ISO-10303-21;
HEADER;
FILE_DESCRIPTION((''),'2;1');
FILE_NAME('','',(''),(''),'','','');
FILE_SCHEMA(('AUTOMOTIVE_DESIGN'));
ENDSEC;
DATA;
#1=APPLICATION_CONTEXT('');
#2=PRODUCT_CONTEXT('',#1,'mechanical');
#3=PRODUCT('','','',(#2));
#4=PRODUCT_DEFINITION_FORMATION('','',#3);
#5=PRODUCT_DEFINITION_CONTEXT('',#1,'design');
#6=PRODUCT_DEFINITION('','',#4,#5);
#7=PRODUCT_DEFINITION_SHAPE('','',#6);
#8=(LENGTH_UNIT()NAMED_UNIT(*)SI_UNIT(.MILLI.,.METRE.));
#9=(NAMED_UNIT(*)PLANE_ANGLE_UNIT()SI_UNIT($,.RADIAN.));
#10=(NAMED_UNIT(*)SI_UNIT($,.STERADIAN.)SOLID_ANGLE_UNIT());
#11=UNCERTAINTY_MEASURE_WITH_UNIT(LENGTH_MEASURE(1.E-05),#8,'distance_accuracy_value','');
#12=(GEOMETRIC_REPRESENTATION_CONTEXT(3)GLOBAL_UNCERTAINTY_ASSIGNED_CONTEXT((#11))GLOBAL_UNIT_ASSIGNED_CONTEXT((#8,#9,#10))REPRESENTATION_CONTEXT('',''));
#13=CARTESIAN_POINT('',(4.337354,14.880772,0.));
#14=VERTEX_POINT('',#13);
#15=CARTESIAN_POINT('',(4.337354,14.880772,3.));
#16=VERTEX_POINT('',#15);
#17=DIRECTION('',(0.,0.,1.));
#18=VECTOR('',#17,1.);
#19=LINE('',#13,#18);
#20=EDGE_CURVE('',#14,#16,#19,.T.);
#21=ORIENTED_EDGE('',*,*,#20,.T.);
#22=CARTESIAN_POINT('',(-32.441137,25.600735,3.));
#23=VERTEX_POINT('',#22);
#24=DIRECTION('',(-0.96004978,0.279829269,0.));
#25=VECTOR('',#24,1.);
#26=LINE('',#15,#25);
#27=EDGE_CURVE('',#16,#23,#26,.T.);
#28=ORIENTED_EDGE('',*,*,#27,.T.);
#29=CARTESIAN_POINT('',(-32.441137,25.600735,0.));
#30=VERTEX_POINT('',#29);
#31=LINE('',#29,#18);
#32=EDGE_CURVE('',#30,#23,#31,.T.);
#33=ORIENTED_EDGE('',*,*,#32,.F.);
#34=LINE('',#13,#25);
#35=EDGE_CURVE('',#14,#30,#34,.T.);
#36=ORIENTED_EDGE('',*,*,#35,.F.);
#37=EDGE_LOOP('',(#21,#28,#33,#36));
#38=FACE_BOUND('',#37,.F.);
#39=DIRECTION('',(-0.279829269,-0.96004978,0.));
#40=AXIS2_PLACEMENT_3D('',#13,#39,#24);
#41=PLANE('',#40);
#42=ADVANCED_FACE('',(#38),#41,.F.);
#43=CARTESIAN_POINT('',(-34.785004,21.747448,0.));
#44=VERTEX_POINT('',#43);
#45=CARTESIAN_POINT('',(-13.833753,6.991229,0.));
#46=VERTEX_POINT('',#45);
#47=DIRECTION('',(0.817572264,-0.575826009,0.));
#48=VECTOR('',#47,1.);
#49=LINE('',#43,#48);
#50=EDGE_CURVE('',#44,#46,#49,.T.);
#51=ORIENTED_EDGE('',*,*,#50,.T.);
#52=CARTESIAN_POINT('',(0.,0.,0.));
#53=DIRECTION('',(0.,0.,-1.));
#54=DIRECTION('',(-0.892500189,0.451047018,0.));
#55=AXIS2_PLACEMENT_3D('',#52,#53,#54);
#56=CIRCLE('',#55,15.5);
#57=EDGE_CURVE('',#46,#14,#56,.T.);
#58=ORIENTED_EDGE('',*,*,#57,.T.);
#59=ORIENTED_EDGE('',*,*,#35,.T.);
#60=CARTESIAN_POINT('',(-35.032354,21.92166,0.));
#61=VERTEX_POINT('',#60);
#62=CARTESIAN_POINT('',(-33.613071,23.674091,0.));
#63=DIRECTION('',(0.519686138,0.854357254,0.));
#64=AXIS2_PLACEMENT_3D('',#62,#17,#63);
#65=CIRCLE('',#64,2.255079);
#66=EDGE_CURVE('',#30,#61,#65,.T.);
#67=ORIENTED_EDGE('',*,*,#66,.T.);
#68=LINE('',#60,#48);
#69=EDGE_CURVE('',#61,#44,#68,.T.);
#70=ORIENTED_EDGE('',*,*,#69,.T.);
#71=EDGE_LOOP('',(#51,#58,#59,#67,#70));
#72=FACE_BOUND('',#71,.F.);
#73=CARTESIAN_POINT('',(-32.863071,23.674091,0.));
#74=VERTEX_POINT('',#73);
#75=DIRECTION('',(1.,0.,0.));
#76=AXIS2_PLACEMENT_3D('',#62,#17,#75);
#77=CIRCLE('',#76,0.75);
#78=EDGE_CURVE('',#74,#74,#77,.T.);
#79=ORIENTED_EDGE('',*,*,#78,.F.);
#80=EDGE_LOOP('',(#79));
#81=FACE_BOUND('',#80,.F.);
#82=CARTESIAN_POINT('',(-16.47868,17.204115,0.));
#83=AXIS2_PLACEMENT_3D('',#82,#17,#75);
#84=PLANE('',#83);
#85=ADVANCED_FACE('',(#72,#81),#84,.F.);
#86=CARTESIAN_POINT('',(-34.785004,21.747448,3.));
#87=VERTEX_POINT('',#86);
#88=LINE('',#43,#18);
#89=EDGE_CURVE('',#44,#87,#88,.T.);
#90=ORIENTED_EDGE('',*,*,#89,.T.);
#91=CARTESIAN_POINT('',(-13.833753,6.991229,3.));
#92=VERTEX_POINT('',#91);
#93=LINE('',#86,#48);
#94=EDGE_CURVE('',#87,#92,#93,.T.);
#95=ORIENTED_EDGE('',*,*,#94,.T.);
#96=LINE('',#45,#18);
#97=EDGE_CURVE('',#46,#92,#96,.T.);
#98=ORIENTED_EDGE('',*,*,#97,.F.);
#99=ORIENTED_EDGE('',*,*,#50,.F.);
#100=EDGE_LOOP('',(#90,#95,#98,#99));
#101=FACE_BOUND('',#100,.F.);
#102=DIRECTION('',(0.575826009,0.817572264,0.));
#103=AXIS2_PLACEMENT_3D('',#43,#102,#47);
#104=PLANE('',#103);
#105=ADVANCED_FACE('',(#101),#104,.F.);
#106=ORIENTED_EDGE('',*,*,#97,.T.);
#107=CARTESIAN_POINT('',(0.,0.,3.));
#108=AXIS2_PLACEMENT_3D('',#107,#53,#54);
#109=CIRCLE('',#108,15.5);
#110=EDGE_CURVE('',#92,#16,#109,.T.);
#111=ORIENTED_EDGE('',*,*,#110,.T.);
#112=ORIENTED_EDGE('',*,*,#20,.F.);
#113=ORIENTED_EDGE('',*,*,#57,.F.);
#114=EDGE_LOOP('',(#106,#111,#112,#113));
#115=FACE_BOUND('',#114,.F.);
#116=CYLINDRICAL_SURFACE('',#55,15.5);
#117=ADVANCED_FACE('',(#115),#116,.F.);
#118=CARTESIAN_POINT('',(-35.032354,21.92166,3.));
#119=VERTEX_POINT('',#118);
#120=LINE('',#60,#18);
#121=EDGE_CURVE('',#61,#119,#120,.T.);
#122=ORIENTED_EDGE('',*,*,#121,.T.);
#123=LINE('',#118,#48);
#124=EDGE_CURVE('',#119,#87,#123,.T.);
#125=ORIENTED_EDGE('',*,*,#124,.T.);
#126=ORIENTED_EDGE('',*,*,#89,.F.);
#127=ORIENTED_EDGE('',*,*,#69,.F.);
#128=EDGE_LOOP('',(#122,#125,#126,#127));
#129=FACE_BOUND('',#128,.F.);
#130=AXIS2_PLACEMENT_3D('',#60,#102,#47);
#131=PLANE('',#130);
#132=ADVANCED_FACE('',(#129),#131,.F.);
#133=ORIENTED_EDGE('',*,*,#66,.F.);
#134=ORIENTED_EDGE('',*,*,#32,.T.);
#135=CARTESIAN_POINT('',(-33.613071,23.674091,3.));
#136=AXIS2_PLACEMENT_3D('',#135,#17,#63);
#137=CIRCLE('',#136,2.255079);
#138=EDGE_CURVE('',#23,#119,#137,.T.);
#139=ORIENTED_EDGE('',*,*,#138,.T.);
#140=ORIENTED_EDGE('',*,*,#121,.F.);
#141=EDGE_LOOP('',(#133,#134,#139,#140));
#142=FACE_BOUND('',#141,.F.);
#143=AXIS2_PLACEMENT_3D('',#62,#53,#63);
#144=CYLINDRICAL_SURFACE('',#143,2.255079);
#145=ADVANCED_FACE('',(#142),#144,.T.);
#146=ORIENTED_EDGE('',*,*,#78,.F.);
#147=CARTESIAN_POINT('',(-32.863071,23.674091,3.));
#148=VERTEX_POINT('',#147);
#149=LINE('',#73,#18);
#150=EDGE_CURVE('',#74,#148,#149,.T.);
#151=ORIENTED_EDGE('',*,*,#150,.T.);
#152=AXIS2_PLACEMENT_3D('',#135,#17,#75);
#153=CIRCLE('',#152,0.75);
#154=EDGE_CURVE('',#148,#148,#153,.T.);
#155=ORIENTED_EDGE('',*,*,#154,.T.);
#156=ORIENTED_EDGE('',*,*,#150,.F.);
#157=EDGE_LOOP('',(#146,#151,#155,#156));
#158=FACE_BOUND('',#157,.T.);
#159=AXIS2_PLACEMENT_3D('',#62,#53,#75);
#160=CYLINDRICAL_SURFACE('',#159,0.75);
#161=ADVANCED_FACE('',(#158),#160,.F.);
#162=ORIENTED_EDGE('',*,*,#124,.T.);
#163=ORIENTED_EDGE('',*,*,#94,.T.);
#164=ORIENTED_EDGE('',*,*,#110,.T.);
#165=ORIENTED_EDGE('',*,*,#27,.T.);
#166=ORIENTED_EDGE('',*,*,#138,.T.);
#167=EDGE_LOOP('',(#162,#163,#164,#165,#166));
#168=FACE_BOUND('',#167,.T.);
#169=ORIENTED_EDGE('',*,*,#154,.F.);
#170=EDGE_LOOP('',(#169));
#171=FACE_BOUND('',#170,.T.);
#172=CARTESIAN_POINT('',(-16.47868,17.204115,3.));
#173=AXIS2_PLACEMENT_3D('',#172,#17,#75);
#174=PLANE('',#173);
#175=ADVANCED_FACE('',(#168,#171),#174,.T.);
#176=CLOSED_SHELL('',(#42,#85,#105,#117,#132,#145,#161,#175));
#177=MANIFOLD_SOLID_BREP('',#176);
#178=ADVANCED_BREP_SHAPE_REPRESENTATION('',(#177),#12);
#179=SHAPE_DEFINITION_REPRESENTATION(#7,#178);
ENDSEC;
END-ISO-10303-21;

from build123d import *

# Parameters (mm, degrees)
F0_R     = 0.75
F1_DEPTH = 3


# Not quite as in the source:
# - a feature names something its author has since deleted; it is built from what else it names


with BuildPart() as f1:
    # F0 (on Top) → F1 (new body)
    with BuildSketch(Plane.XY):
        with BuildLine():
            ThreePointArc((-13.8337529302, 6.9912287808), (-6.1730560637, 14.2177135586), (4.3373536701, 14.8807715909))
            Line((4.3373536701, 14.8807715909), (-32.4411373594, 25.6007347374))
            ThreePointArc((-32.4411373594, 25.6007347374), (-35.456761187, 24.972624675), (-35.0323544011, 21.9216595489))
            Line((-35.0323544011, 21.9216595489), (-34.7850043318, 21.747447911))
            Line((-34.7850043318, 21.747447911), (-13.8337529302, 6.9912287808))
        make_face()
        with Locations((-33.6130708456, 23.6740913242)):
            Circle(F0_R, mode=Mode.SUBTRACT)
    extrude(amount=F1_DEPTH)


solid = f1.part
